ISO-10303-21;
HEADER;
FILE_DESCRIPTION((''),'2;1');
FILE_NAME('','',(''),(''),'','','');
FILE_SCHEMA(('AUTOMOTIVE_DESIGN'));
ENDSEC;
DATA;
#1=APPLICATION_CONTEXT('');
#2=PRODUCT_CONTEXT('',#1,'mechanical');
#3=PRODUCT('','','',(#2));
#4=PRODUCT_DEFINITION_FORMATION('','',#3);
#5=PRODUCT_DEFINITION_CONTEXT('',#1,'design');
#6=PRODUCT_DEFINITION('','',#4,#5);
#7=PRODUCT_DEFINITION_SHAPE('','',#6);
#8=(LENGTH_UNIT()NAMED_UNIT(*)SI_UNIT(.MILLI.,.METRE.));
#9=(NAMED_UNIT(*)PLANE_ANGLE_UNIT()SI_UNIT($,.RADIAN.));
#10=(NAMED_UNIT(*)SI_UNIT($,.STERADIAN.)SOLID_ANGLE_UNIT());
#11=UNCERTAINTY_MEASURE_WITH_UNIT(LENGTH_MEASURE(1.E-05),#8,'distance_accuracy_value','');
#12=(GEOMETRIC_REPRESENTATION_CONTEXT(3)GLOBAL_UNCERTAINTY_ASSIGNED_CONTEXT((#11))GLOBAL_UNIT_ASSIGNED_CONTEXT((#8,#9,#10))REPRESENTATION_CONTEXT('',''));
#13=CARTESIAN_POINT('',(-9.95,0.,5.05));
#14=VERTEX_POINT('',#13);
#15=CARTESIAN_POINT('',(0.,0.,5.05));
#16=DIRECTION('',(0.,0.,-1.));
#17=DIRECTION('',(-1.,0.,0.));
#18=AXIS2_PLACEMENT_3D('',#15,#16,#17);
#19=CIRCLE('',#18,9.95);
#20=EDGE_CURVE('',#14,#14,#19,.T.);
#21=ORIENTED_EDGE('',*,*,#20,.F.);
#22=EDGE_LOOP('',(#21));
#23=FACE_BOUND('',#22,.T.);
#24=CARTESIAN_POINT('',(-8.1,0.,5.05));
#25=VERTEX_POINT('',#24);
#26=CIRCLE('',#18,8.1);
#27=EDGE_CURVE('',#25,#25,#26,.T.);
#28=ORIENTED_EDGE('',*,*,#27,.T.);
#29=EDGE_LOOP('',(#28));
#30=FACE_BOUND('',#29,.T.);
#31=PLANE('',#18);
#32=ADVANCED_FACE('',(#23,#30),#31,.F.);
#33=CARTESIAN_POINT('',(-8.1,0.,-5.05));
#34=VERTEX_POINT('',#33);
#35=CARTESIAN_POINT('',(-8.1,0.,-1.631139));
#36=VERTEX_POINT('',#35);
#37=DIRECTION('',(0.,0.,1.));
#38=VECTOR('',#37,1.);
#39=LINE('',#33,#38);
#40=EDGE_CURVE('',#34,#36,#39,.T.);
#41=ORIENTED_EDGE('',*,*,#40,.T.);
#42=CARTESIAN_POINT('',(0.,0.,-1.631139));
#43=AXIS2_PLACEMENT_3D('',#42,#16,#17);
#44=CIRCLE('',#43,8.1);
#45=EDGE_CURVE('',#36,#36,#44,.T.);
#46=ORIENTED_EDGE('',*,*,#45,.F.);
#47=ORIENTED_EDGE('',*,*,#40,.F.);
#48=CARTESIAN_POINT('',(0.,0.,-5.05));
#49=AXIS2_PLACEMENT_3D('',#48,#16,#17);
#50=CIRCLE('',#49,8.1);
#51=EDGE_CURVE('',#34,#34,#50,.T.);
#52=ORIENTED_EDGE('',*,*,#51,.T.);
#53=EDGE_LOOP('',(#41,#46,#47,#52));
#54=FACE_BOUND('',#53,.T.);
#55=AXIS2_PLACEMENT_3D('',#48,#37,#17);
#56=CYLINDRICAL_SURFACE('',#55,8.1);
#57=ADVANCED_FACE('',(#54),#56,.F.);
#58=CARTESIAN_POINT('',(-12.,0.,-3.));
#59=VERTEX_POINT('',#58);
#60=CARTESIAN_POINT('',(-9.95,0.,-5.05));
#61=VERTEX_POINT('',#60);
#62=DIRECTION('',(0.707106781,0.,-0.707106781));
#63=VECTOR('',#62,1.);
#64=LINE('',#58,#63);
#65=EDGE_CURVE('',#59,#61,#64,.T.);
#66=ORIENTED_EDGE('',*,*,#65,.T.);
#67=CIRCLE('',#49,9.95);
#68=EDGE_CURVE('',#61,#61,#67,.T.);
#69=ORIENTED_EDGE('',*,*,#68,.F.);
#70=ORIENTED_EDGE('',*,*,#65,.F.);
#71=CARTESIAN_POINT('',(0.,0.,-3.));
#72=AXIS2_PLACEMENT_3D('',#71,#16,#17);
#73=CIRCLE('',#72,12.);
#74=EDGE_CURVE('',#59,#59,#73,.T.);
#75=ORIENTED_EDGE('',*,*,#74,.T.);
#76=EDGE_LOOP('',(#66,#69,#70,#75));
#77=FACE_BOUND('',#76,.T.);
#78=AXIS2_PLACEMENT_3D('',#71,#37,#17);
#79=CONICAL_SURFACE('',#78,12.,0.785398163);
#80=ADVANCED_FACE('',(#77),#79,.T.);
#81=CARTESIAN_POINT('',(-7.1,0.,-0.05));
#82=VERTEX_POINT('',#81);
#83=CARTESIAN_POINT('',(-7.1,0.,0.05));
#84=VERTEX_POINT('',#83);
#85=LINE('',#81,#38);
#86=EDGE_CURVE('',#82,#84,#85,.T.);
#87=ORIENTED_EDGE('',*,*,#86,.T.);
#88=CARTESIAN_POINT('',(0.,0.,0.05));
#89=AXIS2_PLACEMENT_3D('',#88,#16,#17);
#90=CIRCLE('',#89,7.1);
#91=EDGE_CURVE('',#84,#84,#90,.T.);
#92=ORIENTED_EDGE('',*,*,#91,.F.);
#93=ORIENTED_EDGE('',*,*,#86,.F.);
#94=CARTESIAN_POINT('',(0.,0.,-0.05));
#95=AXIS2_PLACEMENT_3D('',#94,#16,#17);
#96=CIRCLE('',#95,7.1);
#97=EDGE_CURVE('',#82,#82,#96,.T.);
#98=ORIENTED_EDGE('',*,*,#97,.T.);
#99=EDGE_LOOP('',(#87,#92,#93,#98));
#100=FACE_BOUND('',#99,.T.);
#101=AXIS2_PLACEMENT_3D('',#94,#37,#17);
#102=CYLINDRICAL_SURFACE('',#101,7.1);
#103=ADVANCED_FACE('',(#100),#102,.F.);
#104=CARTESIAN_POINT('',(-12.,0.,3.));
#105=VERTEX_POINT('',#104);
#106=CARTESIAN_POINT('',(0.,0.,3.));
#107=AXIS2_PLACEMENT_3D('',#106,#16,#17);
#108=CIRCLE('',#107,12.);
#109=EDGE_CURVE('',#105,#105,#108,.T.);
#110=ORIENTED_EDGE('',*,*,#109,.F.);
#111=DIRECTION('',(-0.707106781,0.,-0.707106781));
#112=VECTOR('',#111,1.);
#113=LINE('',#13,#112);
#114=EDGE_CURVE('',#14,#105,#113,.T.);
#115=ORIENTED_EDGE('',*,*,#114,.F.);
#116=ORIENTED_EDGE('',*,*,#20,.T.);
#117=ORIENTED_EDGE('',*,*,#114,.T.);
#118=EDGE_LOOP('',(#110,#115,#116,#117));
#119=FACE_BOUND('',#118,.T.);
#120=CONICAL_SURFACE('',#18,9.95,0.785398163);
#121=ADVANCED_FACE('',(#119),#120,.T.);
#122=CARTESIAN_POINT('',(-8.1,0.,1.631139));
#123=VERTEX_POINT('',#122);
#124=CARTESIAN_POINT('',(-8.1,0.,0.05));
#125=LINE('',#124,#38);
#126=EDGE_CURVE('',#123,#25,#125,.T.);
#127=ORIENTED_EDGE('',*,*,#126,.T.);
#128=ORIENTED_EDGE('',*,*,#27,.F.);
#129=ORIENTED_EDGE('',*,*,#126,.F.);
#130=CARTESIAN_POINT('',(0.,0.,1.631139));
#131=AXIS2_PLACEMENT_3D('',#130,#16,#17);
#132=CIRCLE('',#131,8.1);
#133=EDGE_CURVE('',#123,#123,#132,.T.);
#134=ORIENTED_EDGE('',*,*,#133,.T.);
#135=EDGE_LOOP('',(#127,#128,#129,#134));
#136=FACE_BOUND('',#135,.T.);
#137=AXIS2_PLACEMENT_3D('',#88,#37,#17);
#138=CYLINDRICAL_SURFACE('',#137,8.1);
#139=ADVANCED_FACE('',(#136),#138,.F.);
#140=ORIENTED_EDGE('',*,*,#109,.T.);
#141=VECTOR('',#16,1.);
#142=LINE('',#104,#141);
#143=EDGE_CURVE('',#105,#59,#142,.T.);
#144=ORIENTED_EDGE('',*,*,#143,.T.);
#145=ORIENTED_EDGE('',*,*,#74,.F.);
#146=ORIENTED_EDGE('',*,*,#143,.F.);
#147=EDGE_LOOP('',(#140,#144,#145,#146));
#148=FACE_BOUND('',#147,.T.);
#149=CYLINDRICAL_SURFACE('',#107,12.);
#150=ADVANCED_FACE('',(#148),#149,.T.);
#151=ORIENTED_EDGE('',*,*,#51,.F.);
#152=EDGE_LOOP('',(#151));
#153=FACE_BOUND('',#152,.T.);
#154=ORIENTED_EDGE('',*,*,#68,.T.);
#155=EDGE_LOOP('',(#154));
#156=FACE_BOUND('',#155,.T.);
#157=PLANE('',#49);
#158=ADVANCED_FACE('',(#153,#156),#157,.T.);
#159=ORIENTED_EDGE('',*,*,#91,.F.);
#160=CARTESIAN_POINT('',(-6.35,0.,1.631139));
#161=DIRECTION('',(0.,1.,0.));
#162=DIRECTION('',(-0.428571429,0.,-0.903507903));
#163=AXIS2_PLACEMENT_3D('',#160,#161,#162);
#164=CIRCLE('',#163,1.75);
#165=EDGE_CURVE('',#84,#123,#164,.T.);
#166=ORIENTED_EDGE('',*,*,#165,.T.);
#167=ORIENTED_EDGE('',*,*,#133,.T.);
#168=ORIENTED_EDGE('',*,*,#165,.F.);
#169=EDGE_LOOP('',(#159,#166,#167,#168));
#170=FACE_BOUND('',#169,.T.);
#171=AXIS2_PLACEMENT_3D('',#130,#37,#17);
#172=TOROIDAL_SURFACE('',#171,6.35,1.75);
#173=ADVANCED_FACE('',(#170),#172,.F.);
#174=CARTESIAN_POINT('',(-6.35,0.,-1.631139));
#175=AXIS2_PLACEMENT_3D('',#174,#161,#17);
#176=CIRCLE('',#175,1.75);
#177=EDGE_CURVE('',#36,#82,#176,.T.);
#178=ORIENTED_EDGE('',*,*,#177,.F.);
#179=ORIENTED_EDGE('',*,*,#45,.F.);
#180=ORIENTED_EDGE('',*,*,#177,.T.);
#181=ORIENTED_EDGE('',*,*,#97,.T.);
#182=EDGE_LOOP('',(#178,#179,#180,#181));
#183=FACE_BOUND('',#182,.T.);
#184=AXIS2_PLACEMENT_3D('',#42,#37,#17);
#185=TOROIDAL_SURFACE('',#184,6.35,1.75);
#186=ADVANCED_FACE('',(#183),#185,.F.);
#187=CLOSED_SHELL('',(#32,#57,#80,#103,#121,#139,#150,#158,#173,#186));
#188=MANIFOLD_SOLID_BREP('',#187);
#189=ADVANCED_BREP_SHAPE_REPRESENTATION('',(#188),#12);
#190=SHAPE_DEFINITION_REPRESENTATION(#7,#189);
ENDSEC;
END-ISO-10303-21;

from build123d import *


# Not quite as in the source:
# - a fillet or chamfer that OpenCascade refuses, or shapes differently, is made with other operations: its cross-section is extruded or revolved along the edge and cut away or added


with BuildPart() as f1:
    # F0 (on Front) → F1 (revolve)
    with BuildSketch(Plane.XZ):
        Polygon((-7.1, 0.05), (-8.1, 0.05), (-8.1, 5.05), (-9.95, 5.05), (-12, 3), (-12, -3), (-9.95, -5.05), (-8.1, -5.05), (-8.1, -0.05), (-7.1, -0.05), align=None)
    revolve(axis=Axis((0, 0, 10.9107699245), (0, 0, -1)))

    # F2: fillet of radius 1.75 on 2 edges, made by hand

    # F2_s1 → F2_t2 (revolve)
    with BuildSketch(Plane.XZ):
        with BuildLine():
            ThreePointArc((-8.1, -1.6311388301), (-7.8290199458, -0.6957244834), (-7.1, -0.05))
            Line((-7.1, -0.05), (-7.115, -0.0183772234))
            ThreePointArc((-7.115, -0.0183772234), (-7.6, -0.015), (-8.1, -0.015))
            Line((-8.1, -0.015), (-8.135, -0.05))
            Line((-8.135, -0.05), (-8.135, -1.6311388301))
            Line((-8.135, -1.6311388301), (-8.1, -1.6311388301))
        make_face()
    revolve(axis=Axis((0, 0, -0.05), (0, 0, -1)))

    # F2_s3 → F2_t4 (revolve)
    with BuildSketch(Plane.XZ):
        with BuildLine():
            ThreePointArc((-7.1, 0.05), (-7.8290199458, 0.6957244834), (-8.1, 1.6311388301))
            Line((-8.1, 1.6311388301), (-8.135, 1.6311388301))
            Line((-8.135, 1.6311388301), (-8.135, 0.05))
            Line((-8.135, 0.05), (-8.1, 0.015))
            ThreePointArc((-8.1, 0.015), (-7.6, 0.015), (-7.115, 0.0183772234))
            Line((-7.115, 0.0183772234), (-7.1, 0.05))
        make_face()
    revolve(axis=Axis((0, 0, 0.05), (0, 0, -1)))


solid = f1.part
